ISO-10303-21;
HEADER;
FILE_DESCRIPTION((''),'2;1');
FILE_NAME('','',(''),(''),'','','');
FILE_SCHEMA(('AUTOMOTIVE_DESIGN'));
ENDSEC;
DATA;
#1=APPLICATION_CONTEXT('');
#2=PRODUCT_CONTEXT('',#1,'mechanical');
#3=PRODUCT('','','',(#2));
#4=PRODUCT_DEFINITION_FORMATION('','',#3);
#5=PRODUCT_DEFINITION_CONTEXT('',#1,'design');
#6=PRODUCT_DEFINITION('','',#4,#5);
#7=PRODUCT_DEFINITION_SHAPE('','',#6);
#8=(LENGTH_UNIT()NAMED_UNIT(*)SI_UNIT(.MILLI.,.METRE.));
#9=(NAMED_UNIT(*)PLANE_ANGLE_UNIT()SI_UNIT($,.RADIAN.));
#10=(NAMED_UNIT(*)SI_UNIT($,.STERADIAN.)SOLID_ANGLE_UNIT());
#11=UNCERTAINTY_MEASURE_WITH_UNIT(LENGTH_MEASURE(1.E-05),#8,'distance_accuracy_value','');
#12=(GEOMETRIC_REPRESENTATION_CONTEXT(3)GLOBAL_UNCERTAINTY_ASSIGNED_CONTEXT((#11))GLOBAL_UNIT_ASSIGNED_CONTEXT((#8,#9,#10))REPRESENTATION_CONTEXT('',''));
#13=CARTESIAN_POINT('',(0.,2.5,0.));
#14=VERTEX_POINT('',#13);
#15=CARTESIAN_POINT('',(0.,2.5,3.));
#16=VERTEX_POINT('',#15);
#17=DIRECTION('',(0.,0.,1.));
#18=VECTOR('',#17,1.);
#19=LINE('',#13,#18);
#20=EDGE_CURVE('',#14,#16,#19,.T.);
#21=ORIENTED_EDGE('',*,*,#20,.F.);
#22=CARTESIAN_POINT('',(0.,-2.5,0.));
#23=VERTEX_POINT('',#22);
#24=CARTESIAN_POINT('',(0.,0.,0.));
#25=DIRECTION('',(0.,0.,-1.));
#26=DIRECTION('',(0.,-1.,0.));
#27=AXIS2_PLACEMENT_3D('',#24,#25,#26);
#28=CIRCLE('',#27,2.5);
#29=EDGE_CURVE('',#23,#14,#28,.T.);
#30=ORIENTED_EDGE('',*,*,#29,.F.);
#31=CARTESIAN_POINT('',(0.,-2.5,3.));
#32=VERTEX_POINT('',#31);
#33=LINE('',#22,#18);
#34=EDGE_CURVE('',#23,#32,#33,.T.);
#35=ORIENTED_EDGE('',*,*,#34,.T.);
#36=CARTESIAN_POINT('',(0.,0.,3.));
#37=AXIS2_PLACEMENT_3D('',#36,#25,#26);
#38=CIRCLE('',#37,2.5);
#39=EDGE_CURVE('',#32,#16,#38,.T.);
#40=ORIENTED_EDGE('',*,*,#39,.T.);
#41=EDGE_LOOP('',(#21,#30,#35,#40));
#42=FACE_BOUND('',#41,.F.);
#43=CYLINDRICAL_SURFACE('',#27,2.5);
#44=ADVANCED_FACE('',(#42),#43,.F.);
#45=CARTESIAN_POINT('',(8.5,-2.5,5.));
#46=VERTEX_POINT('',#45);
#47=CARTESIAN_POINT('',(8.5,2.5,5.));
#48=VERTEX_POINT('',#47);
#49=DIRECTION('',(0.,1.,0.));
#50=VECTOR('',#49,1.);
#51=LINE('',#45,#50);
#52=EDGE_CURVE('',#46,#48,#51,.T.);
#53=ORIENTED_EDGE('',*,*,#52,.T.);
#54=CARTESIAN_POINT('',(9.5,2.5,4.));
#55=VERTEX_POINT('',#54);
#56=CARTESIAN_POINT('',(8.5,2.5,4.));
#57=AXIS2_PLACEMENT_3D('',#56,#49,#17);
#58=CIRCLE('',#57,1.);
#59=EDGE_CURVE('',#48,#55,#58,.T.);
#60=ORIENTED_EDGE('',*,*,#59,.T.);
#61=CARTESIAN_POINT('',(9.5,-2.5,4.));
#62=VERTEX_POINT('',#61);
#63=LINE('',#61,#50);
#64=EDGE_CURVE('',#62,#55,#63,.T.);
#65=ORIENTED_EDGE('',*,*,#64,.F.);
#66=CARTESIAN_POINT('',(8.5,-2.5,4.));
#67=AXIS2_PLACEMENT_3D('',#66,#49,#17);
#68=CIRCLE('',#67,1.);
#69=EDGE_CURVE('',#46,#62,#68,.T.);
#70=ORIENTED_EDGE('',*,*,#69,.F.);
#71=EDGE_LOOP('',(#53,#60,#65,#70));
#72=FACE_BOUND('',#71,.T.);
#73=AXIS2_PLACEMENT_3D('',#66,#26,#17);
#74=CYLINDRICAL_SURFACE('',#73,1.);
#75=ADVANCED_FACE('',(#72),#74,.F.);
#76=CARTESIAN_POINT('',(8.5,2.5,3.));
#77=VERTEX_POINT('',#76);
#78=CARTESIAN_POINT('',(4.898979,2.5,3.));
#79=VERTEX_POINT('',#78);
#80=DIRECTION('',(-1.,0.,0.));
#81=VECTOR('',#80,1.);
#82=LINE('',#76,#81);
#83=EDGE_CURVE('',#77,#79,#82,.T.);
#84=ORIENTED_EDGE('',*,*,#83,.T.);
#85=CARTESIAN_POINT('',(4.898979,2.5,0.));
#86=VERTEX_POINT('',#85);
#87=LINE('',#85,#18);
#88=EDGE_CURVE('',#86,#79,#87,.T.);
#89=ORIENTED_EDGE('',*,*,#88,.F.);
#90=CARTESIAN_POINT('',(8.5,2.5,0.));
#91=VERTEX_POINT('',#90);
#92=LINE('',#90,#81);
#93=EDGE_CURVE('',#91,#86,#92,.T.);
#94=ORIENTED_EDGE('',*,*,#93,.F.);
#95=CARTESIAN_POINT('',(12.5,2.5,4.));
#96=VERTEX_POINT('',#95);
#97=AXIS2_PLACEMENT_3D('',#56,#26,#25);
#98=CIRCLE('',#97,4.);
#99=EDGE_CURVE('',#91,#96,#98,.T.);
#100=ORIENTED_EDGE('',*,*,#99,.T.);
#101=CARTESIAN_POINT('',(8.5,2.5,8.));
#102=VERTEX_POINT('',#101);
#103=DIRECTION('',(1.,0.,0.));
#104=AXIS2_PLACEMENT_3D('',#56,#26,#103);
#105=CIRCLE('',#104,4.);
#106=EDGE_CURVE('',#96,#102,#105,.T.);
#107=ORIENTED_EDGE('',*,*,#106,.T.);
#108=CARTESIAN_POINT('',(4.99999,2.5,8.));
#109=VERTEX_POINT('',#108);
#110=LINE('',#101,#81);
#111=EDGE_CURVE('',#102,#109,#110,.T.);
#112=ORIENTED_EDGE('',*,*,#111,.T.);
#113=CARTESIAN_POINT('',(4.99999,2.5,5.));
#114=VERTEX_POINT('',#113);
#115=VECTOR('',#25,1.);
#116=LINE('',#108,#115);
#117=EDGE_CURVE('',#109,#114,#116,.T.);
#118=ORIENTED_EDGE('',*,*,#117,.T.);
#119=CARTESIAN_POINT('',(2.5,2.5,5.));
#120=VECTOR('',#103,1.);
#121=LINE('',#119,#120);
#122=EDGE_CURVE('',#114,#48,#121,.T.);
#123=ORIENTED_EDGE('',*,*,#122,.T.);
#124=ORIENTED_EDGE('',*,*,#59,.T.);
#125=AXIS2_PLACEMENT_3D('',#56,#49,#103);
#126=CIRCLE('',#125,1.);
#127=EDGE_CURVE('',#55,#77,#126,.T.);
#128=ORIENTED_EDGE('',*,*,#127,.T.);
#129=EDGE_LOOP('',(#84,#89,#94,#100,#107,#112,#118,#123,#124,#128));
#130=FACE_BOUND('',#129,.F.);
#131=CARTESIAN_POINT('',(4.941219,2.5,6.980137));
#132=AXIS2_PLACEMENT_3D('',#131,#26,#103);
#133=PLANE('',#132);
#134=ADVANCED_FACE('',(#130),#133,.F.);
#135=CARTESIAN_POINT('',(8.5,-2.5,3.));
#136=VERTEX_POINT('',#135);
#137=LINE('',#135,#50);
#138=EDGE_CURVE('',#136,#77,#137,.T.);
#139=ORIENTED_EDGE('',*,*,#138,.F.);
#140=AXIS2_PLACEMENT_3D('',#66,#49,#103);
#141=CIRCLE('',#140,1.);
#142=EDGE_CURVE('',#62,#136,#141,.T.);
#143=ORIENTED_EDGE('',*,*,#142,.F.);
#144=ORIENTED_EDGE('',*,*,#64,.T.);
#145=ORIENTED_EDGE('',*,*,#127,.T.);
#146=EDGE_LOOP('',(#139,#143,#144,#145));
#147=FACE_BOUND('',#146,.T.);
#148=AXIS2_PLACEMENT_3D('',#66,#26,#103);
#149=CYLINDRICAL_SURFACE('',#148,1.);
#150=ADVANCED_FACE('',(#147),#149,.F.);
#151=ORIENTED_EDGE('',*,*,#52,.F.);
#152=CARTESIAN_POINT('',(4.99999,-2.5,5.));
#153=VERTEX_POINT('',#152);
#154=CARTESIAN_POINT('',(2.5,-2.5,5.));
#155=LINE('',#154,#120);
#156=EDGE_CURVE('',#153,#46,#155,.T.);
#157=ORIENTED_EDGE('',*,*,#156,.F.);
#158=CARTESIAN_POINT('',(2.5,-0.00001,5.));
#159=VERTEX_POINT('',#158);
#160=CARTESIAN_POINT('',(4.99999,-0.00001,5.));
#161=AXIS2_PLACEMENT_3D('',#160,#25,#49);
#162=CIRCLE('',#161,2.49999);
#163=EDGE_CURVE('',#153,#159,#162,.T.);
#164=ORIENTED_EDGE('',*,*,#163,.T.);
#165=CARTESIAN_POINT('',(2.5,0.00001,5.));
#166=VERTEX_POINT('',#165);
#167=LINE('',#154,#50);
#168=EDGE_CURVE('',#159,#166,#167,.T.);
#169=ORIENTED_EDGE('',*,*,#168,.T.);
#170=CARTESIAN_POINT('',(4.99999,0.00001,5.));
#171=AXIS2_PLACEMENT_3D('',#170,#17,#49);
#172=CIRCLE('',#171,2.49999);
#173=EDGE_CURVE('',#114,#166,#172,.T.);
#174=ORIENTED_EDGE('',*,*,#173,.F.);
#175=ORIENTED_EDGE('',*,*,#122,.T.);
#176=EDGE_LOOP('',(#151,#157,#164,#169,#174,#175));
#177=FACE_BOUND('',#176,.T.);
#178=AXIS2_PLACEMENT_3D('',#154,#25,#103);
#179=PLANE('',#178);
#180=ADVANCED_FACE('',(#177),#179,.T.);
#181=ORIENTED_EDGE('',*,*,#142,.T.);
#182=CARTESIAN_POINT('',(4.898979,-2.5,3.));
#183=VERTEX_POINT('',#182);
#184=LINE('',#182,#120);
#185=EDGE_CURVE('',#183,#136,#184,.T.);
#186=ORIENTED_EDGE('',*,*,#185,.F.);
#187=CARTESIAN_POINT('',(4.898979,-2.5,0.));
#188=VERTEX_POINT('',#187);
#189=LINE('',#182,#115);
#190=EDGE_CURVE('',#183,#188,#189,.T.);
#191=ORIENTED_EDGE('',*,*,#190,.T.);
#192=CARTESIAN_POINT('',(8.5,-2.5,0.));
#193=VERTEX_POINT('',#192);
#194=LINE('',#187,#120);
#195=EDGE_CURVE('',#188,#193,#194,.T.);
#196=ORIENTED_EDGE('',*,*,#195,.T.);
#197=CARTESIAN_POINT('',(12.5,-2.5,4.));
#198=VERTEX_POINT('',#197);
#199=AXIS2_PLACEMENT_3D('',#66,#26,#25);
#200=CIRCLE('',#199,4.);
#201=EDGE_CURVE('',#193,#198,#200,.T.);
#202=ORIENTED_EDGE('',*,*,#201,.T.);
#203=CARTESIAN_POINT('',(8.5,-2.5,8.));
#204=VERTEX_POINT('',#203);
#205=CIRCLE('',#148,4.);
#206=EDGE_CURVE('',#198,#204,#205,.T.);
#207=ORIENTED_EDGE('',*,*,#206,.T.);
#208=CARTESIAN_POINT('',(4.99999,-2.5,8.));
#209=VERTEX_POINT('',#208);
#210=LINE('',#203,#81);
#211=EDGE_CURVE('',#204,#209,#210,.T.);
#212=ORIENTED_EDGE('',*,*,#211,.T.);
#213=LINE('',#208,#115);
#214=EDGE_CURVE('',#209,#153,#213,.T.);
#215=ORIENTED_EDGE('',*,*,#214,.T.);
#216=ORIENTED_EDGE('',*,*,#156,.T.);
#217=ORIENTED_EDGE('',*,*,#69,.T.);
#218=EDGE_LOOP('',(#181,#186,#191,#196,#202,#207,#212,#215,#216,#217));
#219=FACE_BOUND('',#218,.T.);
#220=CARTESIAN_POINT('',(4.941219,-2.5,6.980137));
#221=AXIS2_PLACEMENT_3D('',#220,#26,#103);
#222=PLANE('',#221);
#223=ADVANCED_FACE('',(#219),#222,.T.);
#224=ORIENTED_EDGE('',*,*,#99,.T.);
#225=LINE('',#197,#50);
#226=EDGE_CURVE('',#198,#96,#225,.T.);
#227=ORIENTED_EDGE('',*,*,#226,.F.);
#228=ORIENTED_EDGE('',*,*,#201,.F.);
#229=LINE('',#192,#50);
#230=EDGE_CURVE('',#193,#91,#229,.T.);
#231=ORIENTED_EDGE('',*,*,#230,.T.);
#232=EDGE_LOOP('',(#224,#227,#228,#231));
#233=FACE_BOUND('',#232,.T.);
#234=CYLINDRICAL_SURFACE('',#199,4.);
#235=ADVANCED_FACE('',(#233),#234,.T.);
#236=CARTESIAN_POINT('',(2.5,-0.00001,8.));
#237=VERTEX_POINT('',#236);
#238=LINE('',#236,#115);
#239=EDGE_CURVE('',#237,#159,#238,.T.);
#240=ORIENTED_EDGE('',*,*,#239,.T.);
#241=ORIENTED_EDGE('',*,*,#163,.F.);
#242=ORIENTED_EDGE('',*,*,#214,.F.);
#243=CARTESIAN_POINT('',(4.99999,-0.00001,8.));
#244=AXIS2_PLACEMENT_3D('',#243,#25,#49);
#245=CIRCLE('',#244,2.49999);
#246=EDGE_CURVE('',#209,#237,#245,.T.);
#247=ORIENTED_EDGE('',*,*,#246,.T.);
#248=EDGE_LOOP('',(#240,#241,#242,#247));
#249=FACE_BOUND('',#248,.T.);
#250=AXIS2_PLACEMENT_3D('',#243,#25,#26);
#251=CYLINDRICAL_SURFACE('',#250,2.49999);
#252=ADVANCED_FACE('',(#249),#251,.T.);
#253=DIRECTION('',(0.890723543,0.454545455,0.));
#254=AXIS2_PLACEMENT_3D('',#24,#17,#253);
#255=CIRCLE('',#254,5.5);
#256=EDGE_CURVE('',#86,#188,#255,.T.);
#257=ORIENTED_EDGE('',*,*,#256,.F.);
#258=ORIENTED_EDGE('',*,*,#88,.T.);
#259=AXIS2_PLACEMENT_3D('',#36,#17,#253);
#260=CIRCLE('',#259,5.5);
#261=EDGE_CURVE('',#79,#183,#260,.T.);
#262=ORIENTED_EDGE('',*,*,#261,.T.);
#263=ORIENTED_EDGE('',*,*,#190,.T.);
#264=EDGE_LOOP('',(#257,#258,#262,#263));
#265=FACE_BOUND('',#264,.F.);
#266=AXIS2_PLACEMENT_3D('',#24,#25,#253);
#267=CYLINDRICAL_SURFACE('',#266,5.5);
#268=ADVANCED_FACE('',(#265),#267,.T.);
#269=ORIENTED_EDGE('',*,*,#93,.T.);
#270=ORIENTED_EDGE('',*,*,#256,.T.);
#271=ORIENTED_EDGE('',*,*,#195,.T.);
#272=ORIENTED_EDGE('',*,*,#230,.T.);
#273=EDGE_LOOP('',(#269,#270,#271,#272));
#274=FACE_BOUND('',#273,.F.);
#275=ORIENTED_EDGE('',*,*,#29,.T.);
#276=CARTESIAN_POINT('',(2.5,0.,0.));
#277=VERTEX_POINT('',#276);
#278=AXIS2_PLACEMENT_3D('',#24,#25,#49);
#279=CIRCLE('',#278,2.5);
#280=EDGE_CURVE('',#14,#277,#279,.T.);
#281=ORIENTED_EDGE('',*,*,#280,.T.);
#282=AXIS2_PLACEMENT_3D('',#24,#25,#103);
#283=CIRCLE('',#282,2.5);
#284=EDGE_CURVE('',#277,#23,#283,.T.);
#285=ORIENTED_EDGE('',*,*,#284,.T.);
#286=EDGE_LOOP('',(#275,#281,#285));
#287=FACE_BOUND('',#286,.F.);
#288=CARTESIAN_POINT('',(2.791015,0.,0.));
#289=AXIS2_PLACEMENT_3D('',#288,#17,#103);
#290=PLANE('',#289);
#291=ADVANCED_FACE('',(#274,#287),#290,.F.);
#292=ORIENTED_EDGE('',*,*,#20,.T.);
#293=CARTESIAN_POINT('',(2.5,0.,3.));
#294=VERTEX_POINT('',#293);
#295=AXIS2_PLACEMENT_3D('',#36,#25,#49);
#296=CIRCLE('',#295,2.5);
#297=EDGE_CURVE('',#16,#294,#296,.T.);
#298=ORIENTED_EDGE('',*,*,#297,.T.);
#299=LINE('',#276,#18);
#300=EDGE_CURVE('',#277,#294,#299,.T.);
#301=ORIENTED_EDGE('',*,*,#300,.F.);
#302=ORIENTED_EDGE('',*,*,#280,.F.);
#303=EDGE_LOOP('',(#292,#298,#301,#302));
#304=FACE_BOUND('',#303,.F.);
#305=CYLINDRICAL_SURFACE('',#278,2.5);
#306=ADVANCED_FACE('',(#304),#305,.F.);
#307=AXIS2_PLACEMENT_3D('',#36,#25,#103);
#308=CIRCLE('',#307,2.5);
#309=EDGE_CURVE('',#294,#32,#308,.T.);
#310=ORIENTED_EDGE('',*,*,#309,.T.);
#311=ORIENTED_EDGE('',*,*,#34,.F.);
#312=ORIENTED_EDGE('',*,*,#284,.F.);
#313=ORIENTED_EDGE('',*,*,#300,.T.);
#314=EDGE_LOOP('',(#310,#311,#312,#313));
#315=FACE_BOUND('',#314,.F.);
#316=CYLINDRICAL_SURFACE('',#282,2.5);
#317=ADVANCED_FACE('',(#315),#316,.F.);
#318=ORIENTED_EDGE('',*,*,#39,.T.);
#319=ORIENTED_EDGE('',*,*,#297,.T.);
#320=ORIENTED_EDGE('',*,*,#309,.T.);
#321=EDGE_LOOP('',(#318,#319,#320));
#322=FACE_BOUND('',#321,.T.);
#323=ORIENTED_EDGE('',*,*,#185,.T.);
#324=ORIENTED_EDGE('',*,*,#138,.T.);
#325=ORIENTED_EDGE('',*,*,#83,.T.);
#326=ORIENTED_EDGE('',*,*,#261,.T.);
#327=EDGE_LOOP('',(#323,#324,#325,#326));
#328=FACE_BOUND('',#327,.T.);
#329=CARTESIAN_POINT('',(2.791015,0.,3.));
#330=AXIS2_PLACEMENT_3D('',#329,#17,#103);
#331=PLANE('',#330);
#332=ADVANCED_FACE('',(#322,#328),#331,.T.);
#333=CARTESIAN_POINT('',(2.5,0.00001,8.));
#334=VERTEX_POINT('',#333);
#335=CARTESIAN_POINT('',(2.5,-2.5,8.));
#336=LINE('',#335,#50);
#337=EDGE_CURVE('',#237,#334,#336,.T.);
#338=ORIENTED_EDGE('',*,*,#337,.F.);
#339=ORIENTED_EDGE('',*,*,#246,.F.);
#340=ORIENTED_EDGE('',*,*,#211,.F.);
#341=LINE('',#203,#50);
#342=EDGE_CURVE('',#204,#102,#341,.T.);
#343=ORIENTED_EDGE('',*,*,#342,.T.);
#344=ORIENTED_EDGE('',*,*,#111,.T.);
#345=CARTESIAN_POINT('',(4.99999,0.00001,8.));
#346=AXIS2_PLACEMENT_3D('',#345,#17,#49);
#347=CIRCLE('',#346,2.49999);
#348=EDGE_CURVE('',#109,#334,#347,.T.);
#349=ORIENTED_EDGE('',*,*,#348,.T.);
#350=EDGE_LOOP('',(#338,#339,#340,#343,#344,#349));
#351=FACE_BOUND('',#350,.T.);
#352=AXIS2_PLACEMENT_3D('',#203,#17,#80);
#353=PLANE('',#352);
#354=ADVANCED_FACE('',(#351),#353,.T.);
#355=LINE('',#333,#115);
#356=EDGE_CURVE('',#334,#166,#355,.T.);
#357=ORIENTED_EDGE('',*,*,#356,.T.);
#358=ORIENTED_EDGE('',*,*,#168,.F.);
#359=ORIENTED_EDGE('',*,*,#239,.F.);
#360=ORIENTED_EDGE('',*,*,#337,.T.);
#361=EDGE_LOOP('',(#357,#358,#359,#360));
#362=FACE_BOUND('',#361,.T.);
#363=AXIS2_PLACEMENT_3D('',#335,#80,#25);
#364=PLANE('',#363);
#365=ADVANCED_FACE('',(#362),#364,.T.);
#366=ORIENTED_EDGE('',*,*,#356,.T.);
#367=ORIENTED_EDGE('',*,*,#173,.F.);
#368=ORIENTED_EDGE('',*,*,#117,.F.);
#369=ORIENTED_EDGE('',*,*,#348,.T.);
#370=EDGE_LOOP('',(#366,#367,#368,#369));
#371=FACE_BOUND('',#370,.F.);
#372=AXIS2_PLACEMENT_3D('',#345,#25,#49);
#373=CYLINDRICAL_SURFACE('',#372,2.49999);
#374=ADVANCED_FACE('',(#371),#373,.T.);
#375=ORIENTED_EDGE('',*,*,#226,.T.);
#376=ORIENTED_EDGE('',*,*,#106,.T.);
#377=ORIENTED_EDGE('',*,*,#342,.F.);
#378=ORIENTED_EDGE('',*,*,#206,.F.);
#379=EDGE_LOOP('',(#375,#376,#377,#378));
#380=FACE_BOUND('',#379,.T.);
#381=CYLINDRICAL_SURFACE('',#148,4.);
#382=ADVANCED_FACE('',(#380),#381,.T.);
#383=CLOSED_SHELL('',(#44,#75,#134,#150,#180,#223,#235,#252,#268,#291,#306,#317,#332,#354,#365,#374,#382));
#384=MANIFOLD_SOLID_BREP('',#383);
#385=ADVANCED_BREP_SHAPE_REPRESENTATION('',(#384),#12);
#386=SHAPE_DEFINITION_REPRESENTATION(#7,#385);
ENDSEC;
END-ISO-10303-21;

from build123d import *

# Parameters (mm, degrees)
F1_DEPTH = 3
F3_DEPTH = 5
F4_R     = 2.49999


# Not quite as in the source:
# - a fillet or chamfer is up to 0.001 mm smaller than in the source, because OpenCascade refuses the exact size


with BuildPart() as f1:
    # F0 (on Top) → F1 (new body)
    with BuildSketch(Plane.XY):
        with BuildLine():
            ThreePointArc((0, 2.5), (1.767766953, 1.767766953), (2.5, 0))
            ThreePointArc((2.5, 0), (1.767766953, -1.767766953), (0, -2.5))
            Line((0, -2.5), (4.8989794856, -2.5))
            ThreePointArc((4.8989794856, -2.5), (5.3476343915, -1.2856151892), (5.5, 0))
            ThreePointArc((5.5, 0), (5.3476343915, 1.2856151892), (4.8989794856, 2.5))
            Line((4.8989794856, 2.5), (0, 2.5))
        make_face()
        with BuildLine():
            ThreePointArc((0, -2.5), (-2.5, 0), (0, 2.5))
            Line((0, 2.5), (4.8989794856, 2.5))
            ThreePointArc((4.8989794856, 2.5), (-5.5, 0), (4.8989794856, -2.5))
            Line((4.8989794856, -2.5), (0, -2.5))
        make_face()
        with BuildLine():
            Line((8.5, 2.5), (4.8989794856, 2.5))
            ThreePointArc((4.8989794856, 2.5), (5.3476343915, 1.2856151892), (5.5, 0))
            ThreePointArc((5.5, 0), (5.3476343915, -1.2856151892), (4.8989794856, -2.5))
            Line((4.8989794856, -2.5), (8.5, -2.5))
            Line((8.5, -2.5), (8.5, 2.5))
        make_face()
    extrude(amount=F1_DEPTH)

    # F2 (on face) → F3 (join, through all)
    with BuildSketch(Plane.XZ.offset(2.5)):
        with BuildLine():
            Line((2.5, 5), (4.6270166538, 5))
            ThreePointArc((4.6270166538, 5), (6.0505102572, 7.1622776602), (8.5, 8))
            Line((8.5, 8), (2.5, 8))
            Line((2.5, 8), (2.5, 5))
        make_face()
        with BuildLine():
            Line((8.5, 0), (8.5, 3))
            Line((8.5, 3), (4.8989794856, 3))
            Line((4.8989794856, 3), (4.8989794856, 2.258549095))
            ThreePointArc((4.8989794856, 2.258549095), (6.3746533953, 0.6113569368), (8.5, 0))
        make_face()
        with BuildLine():
            ThreePointArc((8.5, 5), (9.2071067812, 4.7071067812), (9.5, 4))
            ThreePointArc((9.5, 4), (9.2071067812, 3.2928932188), (8.5, 3))
            Line((8.5, 3), (8.5, 0))
            ThreePointArc((8.5, 0), (11.3284271247, 1.1715728753), (12.5, 4))
            ThreePointArc((12.5, 4), (11.3284271247, 6.8284271247), (8.5, 8))
            ThreePointArc((8.5, 8), (6.0505102572, 7.1622776602), (4.6270166538, 5))
            Line((4.6270166538, 5), (8.5, 5))
        make_face()
    extrude(amount=-F3_DEPTH)

    # F4 (radius 2.5 in the source; OpenCascade refuses exactly that, so slightly less here)
    f4_edges = [f1.edges().sort_by_distance(p)[0] for p in [
        (2.5, -2.5, 6.5),
        (2.5, 2.5, 6.5),
    ]]
    fillet(f4_edges, radius=F4_R)


solid = f1.part
